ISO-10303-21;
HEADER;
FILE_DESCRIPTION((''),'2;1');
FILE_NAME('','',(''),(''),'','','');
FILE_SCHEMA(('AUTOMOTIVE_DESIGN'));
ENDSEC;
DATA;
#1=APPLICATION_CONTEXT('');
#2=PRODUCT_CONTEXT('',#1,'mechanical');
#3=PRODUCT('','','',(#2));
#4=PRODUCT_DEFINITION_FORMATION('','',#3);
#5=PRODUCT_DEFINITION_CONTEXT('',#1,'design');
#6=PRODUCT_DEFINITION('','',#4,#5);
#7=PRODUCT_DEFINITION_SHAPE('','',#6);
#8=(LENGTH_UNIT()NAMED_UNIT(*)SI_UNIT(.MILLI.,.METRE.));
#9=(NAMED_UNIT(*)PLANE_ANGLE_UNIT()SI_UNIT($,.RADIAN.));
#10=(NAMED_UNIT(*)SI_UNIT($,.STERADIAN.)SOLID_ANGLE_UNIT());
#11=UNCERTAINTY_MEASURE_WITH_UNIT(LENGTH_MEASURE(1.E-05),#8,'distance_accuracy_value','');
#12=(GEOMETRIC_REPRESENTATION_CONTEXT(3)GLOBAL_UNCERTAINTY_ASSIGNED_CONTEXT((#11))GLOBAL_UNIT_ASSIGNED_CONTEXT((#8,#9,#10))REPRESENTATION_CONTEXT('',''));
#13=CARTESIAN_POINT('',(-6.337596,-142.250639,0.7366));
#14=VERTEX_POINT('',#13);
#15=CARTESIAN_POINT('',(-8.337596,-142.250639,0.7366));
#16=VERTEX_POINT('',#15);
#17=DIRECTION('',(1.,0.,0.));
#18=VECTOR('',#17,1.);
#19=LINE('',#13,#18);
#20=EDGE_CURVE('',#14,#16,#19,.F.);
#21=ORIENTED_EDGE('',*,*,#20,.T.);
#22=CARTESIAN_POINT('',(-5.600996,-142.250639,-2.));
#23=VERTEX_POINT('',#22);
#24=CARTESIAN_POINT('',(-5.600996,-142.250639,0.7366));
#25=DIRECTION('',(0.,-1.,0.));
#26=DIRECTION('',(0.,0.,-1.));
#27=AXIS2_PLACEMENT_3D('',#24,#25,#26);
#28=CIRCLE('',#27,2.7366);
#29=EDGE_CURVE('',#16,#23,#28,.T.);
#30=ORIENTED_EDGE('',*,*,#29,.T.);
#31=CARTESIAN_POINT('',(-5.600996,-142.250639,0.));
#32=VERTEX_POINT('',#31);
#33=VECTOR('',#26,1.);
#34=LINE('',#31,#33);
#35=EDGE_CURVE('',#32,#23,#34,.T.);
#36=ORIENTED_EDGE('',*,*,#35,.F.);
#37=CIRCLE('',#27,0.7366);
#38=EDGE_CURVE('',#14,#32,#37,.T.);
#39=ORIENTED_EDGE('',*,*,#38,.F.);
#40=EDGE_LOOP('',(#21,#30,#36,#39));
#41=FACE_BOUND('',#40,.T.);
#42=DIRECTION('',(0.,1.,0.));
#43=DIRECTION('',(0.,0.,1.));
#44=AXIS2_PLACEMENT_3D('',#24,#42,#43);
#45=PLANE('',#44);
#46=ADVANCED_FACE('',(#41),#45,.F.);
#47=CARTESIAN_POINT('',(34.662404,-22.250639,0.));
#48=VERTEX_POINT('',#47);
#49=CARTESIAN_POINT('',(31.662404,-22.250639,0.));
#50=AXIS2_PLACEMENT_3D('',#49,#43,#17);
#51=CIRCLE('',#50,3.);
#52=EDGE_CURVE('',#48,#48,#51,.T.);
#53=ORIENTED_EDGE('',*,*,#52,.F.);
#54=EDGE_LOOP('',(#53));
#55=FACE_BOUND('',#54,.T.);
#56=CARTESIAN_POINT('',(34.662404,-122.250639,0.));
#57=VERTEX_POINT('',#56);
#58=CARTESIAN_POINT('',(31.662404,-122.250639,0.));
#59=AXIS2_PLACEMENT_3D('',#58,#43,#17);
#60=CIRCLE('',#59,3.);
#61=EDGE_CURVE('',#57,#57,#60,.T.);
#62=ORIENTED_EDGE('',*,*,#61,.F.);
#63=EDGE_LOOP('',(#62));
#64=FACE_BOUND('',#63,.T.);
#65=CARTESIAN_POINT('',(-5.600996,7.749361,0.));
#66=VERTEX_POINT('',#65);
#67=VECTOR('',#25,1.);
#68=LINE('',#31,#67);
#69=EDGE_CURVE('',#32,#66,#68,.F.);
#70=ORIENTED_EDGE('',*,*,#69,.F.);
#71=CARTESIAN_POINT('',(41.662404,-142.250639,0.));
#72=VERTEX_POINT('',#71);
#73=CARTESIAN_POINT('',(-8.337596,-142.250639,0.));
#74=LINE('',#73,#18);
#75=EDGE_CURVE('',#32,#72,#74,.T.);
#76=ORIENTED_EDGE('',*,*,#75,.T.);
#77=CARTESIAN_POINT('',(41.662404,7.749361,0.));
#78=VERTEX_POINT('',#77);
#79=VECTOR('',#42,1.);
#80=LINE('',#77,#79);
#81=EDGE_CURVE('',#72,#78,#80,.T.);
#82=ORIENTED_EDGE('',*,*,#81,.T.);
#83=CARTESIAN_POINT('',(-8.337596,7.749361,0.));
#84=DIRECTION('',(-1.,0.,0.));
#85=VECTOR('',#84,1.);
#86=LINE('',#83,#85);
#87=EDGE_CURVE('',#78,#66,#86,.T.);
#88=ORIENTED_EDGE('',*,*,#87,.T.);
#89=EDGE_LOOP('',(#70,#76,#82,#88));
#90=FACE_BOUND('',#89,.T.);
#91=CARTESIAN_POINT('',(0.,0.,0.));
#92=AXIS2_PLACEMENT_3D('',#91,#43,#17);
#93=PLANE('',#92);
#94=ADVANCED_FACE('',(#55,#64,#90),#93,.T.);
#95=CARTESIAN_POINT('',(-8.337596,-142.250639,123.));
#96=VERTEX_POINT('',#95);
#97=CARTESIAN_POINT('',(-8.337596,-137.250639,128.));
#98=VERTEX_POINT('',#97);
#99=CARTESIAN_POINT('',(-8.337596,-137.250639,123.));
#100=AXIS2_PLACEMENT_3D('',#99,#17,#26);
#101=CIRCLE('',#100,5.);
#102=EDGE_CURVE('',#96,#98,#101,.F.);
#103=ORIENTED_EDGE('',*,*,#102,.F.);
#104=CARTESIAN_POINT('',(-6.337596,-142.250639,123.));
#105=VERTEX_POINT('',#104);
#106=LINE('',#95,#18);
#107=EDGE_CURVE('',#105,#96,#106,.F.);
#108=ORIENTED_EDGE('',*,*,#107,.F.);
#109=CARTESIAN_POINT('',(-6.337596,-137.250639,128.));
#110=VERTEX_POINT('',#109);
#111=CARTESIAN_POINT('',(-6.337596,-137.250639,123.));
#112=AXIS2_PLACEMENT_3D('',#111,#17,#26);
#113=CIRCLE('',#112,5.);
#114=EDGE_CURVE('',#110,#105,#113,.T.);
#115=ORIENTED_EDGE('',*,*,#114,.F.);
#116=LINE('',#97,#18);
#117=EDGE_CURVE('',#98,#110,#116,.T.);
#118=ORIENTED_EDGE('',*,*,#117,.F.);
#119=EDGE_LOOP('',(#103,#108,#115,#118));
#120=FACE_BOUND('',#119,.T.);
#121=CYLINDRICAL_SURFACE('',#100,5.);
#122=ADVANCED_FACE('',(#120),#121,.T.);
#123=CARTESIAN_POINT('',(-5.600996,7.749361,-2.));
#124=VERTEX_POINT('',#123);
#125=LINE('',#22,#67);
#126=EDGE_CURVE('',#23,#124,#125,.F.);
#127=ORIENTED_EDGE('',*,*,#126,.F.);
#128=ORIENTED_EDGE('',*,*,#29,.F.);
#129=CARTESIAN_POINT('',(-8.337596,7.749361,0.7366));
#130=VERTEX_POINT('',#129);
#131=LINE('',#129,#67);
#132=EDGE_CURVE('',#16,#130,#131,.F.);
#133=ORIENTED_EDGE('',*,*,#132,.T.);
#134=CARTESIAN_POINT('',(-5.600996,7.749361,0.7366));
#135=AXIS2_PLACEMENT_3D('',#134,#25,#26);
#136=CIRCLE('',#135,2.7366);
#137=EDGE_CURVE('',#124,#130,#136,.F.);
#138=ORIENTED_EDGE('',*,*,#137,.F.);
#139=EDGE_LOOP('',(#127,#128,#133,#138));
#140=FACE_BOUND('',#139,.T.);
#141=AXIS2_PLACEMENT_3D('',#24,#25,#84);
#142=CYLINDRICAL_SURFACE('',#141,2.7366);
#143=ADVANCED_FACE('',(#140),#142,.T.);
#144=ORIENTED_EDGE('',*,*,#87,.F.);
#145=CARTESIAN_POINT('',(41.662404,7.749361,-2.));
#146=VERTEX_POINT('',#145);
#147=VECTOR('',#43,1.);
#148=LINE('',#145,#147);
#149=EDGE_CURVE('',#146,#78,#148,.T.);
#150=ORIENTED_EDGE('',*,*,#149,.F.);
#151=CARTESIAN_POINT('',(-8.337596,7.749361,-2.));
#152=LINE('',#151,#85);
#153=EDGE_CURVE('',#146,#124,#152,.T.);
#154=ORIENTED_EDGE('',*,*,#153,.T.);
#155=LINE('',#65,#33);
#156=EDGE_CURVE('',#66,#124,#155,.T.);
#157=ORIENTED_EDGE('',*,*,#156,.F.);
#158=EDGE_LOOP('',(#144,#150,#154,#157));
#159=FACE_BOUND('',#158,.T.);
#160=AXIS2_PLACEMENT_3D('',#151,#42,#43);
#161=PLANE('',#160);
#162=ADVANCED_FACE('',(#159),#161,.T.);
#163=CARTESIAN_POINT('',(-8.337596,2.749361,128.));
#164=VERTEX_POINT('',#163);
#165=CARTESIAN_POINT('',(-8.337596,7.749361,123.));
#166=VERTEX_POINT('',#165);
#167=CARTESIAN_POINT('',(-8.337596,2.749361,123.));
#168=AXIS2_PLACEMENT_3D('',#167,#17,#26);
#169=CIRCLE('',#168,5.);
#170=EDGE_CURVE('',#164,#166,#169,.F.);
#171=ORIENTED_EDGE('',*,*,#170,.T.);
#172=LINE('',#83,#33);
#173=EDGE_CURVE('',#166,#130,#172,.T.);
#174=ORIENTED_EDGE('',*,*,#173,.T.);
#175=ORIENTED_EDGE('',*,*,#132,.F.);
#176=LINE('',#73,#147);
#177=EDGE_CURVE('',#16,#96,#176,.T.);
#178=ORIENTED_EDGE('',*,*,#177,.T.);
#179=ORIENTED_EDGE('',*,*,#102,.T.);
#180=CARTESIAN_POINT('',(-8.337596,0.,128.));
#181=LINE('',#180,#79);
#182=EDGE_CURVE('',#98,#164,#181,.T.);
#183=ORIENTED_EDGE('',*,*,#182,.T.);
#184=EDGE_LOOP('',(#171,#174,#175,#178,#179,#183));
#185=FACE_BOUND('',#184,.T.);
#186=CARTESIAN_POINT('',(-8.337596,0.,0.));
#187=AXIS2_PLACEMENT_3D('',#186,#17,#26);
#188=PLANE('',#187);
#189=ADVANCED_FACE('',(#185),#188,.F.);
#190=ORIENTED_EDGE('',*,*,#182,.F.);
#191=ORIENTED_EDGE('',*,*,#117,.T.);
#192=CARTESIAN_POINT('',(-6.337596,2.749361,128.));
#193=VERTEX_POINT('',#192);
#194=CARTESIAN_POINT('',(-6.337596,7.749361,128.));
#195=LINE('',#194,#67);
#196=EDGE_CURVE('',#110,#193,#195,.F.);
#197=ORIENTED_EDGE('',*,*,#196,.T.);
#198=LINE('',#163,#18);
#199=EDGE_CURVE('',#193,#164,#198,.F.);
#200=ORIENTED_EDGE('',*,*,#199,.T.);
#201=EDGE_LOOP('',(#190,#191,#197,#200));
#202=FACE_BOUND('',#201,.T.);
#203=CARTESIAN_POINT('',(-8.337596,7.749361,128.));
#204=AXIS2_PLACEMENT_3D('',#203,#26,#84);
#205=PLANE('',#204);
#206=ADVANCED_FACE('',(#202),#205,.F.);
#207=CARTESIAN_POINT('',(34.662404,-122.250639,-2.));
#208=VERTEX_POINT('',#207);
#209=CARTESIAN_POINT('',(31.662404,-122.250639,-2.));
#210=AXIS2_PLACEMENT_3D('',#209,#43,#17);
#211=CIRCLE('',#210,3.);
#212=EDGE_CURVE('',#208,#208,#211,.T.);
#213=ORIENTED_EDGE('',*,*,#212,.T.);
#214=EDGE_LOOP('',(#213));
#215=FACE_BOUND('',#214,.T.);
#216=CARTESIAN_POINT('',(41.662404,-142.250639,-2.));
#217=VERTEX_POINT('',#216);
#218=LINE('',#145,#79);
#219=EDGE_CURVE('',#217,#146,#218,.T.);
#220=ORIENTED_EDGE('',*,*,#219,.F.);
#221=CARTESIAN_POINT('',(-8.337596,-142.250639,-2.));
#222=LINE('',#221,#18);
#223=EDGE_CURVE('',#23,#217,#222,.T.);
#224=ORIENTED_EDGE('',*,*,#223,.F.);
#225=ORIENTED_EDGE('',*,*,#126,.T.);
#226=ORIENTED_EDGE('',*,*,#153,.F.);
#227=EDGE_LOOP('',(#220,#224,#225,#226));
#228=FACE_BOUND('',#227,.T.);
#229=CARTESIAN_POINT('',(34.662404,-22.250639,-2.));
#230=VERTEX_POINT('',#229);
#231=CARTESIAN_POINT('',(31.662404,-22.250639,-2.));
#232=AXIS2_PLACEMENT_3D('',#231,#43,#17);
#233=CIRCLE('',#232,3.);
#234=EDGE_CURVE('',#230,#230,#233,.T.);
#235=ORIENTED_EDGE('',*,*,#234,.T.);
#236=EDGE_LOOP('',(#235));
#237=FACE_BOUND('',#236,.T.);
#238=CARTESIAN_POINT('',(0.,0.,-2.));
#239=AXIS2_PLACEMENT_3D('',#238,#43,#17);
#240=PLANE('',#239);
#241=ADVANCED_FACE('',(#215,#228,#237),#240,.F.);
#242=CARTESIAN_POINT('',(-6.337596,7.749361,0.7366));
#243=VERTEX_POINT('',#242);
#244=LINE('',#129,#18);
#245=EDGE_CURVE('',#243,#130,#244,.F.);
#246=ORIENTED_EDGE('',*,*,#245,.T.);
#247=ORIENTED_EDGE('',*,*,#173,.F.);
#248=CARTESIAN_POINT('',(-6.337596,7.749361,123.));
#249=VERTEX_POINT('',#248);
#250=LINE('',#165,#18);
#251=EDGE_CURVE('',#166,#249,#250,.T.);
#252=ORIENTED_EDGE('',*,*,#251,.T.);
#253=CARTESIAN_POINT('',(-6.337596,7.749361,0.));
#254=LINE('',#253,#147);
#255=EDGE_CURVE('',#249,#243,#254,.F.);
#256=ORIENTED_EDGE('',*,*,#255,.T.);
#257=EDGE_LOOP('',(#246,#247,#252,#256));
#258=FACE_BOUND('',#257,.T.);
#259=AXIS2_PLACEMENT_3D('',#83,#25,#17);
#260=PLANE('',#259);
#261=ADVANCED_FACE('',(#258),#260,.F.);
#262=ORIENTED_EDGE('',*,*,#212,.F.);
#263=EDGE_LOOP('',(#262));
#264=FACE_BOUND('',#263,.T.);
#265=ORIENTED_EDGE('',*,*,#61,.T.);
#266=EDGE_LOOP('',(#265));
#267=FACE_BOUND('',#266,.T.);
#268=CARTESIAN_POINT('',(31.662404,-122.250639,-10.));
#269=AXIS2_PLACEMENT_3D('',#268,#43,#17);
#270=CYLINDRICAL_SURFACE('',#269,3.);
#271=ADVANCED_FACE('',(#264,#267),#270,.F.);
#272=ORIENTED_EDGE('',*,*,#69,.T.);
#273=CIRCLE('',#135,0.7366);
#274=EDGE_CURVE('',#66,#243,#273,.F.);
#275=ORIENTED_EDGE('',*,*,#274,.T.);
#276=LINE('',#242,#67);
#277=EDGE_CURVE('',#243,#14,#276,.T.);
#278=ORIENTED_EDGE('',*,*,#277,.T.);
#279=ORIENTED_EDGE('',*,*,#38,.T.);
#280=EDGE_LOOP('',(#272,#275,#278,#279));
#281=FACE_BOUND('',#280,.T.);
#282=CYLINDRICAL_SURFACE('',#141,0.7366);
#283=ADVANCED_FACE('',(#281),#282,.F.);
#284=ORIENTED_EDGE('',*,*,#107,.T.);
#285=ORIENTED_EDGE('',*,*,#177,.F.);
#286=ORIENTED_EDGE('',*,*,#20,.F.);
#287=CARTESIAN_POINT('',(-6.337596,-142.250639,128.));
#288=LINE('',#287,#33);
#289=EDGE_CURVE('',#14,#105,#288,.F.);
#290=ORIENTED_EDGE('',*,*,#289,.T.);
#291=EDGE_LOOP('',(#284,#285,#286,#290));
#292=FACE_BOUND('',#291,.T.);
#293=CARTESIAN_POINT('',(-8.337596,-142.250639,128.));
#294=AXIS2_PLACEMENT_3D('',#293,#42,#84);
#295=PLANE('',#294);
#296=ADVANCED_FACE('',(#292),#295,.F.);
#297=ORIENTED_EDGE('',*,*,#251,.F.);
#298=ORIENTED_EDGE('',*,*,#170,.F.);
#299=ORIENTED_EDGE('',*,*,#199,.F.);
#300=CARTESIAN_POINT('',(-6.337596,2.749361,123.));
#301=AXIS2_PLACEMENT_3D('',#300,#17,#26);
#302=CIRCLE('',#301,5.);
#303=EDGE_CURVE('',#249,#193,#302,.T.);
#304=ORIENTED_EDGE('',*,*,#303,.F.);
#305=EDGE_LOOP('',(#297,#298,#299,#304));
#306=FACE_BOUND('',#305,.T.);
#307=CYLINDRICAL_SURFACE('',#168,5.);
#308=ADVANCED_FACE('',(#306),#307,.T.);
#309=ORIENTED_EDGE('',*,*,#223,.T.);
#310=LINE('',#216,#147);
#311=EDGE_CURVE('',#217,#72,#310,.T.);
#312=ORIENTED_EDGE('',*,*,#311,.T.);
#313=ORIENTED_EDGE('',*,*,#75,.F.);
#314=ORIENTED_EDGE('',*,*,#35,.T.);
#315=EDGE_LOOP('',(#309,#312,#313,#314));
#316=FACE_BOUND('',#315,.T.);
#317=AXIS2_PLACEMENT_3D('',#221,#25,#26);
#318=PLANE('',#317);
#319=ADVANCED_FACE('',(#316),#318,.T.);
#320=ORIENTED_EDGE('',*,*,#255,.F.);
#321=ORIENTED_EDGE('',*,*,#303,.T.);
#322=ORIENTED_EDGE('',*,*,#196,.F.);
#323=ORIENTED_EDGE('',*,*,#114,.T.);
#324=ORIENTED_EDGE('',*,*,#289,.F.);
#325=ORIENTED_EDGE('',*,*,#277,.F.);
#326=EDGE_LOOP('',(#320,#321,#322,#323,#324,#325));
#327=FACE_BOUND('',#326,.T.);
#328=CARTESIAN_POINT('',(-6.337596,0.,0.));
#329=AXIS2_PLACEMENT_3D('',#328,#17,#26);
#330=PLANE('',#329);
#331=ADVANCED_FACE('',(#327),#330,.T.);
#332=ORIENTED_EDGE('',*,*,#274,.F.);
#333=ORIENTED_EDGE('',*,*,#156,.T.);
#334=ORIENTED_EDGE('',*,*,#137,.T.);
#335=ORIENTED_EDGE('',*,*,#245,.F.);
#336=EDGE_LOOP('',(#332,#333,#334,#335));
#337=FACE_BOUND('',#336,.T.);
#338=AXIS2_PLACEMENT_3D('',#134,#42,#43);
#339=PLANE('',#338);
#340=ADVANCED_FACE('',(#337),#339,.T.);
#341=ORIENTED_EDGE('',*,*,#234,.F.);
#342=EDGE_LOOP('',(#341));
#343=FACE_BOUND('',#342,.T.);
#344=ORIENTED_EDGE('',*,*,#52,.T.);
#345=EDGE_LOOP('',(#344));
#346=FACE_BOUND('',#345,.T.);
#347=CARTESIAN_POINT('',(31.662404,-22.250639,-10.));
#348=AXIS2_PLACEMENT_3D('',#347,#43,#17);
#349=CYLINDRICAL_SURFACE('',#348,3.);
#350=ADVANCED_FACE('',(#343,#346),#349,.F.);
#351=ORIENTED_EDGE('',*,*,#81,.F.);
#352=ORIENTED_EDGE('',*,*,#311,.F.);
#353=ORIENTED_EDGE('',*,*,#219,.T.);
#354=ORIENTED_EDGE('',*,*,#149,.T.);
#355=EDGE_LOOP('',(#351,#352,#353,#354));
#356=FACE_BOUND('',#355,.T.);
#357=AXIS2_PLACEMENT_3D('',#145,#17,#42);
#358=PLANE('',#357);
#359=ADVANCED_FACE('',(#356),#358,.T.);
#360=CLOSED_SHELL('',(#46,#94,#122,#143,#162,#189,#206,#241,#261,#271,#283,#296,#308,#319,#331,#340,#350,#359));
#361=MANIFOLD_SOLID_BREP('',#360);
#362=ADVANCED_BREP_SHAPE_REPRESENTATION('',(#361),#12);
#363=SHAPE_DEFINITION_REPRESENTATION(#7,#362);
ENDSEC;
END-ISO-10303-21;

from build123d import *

# Parameters (mm, degrees)
SKETCH_1_W                       = 50
SKETCH_1_H                       = 150
SM_BASE_FLANGE_1_DEPTH           = 2
SM_EDGE_FLANGE_1_STRIP_W         = 9.4732
SM_EDGE_FLANGE_1_STRIP_H         = 2
SM_EDGE_FLANGE_1_STRIP_CUT_DEPTH = 150
SM_EDGE_FLANGE_1_DEPTH           = 150
SKETCH_8_R                       = 3
CUT_EXTRUDE_1_DEPTH              = 10
PATTERN_LINEAR_1_COUNT           = 2
PATTERN_LINEAR_1_PITCH           = 100
FILLET_2_R                       = 5
FILLET_3_R                       = 5


# Sheet-metal steps are written as plain solids
with BuildPart() as part:
    # Sketch 1 → 基体-法兰1 (new body)
    with BuildSketch(Plane.XY):
        with Locations((16.662404092, -67.250639386)):
            Rectangle(SKETCH_1_W, SKETCH_1_H)
    extrude(amount=-SM_BASE_FLANGE_1_DEPTH)

    # 边线-法兰1 strip (across the edge) → 边线-法兰1 strip cut (cut)
    with BuildSketch(Plane(origin=(-8.337595908, 7.749360614, 0), x_dir=(1, 0, 0), z_dir=(0, -1, 0))):
        with Locations((-2, -1)):
            Rectangle(SM_EDGE_FLANGE_1_STRIP_W, SM_EDGE_FLANGE_1_STRIP_H)
    extrude(amount=SM_EDGE_FLANGE_1_STRIP_CUT_DEPTH, mode=Mode.SUBTRACT)

    # 边线-法兰1 section (across the edge) → 边线-法兰1 (add)
    with BuildSketch(Plane(origin=(-8.337595908, 7.749360614, 0), x_dir=(1, 0, 0), z_dir=(0, -1, 0))):
        with BuildLine():
            Line((0, 0.7366), (0, 128))
            Line((0, 128), (2, 128))
            Line((2, 128), (2, 0.7366))
            ThreePointArc((2, 0.7366), (2.215745145, 0.215745145), (2.7366, 0))
            Line((2.7366, 0), (2.7366, -2))
            ThreePointArc((2.7366, -2), (0.801531583, -1.198468417), (0, 0.7366))
        make_face()
    extrude(amount=SM_EDGE_FLANGE_1_DEPTH)

    # 草图8 → 切除-拉伸1 (cut)
    with BuildSketch(Plane.XY):
        with Locations((31.662404092, -22.250639386)):
            Circle(SKETCH_8_R)
    cut_extrude_1 = extrude(amount=-CUT_EXTRUDE_1_DEPTH, mode=Mode.SUBTRACT)

    # 阵列(线性)1: 切除-拉伸1 ×2
    with Locations(*[(0, -i * PATTERN_LINEAR_1_PITCH, 0) for i in range(1, PATTERN_LINEAR_1_COUNT)]):
        add(cut_extrude_1, mode=Mode.SUBTRACT)

    # 圆角2
    fillet_2_edges = [part.edges().sort_by_distance(p)[0] for p in [
        (-7.337595908, 7.749360614, 128),
    ]]
    fillet(fillet_2_edges, radius=FILLET_2_R)

    # 圆角3
    fillet_3_edges = [part.edges().sort_by_distance(p)[0] for p in [
        (-7.337595908, -142.250639386, 128),
    ]]
    fillet(fillet_3_edges, radius=FILLET_3_R)


solid = part.part
